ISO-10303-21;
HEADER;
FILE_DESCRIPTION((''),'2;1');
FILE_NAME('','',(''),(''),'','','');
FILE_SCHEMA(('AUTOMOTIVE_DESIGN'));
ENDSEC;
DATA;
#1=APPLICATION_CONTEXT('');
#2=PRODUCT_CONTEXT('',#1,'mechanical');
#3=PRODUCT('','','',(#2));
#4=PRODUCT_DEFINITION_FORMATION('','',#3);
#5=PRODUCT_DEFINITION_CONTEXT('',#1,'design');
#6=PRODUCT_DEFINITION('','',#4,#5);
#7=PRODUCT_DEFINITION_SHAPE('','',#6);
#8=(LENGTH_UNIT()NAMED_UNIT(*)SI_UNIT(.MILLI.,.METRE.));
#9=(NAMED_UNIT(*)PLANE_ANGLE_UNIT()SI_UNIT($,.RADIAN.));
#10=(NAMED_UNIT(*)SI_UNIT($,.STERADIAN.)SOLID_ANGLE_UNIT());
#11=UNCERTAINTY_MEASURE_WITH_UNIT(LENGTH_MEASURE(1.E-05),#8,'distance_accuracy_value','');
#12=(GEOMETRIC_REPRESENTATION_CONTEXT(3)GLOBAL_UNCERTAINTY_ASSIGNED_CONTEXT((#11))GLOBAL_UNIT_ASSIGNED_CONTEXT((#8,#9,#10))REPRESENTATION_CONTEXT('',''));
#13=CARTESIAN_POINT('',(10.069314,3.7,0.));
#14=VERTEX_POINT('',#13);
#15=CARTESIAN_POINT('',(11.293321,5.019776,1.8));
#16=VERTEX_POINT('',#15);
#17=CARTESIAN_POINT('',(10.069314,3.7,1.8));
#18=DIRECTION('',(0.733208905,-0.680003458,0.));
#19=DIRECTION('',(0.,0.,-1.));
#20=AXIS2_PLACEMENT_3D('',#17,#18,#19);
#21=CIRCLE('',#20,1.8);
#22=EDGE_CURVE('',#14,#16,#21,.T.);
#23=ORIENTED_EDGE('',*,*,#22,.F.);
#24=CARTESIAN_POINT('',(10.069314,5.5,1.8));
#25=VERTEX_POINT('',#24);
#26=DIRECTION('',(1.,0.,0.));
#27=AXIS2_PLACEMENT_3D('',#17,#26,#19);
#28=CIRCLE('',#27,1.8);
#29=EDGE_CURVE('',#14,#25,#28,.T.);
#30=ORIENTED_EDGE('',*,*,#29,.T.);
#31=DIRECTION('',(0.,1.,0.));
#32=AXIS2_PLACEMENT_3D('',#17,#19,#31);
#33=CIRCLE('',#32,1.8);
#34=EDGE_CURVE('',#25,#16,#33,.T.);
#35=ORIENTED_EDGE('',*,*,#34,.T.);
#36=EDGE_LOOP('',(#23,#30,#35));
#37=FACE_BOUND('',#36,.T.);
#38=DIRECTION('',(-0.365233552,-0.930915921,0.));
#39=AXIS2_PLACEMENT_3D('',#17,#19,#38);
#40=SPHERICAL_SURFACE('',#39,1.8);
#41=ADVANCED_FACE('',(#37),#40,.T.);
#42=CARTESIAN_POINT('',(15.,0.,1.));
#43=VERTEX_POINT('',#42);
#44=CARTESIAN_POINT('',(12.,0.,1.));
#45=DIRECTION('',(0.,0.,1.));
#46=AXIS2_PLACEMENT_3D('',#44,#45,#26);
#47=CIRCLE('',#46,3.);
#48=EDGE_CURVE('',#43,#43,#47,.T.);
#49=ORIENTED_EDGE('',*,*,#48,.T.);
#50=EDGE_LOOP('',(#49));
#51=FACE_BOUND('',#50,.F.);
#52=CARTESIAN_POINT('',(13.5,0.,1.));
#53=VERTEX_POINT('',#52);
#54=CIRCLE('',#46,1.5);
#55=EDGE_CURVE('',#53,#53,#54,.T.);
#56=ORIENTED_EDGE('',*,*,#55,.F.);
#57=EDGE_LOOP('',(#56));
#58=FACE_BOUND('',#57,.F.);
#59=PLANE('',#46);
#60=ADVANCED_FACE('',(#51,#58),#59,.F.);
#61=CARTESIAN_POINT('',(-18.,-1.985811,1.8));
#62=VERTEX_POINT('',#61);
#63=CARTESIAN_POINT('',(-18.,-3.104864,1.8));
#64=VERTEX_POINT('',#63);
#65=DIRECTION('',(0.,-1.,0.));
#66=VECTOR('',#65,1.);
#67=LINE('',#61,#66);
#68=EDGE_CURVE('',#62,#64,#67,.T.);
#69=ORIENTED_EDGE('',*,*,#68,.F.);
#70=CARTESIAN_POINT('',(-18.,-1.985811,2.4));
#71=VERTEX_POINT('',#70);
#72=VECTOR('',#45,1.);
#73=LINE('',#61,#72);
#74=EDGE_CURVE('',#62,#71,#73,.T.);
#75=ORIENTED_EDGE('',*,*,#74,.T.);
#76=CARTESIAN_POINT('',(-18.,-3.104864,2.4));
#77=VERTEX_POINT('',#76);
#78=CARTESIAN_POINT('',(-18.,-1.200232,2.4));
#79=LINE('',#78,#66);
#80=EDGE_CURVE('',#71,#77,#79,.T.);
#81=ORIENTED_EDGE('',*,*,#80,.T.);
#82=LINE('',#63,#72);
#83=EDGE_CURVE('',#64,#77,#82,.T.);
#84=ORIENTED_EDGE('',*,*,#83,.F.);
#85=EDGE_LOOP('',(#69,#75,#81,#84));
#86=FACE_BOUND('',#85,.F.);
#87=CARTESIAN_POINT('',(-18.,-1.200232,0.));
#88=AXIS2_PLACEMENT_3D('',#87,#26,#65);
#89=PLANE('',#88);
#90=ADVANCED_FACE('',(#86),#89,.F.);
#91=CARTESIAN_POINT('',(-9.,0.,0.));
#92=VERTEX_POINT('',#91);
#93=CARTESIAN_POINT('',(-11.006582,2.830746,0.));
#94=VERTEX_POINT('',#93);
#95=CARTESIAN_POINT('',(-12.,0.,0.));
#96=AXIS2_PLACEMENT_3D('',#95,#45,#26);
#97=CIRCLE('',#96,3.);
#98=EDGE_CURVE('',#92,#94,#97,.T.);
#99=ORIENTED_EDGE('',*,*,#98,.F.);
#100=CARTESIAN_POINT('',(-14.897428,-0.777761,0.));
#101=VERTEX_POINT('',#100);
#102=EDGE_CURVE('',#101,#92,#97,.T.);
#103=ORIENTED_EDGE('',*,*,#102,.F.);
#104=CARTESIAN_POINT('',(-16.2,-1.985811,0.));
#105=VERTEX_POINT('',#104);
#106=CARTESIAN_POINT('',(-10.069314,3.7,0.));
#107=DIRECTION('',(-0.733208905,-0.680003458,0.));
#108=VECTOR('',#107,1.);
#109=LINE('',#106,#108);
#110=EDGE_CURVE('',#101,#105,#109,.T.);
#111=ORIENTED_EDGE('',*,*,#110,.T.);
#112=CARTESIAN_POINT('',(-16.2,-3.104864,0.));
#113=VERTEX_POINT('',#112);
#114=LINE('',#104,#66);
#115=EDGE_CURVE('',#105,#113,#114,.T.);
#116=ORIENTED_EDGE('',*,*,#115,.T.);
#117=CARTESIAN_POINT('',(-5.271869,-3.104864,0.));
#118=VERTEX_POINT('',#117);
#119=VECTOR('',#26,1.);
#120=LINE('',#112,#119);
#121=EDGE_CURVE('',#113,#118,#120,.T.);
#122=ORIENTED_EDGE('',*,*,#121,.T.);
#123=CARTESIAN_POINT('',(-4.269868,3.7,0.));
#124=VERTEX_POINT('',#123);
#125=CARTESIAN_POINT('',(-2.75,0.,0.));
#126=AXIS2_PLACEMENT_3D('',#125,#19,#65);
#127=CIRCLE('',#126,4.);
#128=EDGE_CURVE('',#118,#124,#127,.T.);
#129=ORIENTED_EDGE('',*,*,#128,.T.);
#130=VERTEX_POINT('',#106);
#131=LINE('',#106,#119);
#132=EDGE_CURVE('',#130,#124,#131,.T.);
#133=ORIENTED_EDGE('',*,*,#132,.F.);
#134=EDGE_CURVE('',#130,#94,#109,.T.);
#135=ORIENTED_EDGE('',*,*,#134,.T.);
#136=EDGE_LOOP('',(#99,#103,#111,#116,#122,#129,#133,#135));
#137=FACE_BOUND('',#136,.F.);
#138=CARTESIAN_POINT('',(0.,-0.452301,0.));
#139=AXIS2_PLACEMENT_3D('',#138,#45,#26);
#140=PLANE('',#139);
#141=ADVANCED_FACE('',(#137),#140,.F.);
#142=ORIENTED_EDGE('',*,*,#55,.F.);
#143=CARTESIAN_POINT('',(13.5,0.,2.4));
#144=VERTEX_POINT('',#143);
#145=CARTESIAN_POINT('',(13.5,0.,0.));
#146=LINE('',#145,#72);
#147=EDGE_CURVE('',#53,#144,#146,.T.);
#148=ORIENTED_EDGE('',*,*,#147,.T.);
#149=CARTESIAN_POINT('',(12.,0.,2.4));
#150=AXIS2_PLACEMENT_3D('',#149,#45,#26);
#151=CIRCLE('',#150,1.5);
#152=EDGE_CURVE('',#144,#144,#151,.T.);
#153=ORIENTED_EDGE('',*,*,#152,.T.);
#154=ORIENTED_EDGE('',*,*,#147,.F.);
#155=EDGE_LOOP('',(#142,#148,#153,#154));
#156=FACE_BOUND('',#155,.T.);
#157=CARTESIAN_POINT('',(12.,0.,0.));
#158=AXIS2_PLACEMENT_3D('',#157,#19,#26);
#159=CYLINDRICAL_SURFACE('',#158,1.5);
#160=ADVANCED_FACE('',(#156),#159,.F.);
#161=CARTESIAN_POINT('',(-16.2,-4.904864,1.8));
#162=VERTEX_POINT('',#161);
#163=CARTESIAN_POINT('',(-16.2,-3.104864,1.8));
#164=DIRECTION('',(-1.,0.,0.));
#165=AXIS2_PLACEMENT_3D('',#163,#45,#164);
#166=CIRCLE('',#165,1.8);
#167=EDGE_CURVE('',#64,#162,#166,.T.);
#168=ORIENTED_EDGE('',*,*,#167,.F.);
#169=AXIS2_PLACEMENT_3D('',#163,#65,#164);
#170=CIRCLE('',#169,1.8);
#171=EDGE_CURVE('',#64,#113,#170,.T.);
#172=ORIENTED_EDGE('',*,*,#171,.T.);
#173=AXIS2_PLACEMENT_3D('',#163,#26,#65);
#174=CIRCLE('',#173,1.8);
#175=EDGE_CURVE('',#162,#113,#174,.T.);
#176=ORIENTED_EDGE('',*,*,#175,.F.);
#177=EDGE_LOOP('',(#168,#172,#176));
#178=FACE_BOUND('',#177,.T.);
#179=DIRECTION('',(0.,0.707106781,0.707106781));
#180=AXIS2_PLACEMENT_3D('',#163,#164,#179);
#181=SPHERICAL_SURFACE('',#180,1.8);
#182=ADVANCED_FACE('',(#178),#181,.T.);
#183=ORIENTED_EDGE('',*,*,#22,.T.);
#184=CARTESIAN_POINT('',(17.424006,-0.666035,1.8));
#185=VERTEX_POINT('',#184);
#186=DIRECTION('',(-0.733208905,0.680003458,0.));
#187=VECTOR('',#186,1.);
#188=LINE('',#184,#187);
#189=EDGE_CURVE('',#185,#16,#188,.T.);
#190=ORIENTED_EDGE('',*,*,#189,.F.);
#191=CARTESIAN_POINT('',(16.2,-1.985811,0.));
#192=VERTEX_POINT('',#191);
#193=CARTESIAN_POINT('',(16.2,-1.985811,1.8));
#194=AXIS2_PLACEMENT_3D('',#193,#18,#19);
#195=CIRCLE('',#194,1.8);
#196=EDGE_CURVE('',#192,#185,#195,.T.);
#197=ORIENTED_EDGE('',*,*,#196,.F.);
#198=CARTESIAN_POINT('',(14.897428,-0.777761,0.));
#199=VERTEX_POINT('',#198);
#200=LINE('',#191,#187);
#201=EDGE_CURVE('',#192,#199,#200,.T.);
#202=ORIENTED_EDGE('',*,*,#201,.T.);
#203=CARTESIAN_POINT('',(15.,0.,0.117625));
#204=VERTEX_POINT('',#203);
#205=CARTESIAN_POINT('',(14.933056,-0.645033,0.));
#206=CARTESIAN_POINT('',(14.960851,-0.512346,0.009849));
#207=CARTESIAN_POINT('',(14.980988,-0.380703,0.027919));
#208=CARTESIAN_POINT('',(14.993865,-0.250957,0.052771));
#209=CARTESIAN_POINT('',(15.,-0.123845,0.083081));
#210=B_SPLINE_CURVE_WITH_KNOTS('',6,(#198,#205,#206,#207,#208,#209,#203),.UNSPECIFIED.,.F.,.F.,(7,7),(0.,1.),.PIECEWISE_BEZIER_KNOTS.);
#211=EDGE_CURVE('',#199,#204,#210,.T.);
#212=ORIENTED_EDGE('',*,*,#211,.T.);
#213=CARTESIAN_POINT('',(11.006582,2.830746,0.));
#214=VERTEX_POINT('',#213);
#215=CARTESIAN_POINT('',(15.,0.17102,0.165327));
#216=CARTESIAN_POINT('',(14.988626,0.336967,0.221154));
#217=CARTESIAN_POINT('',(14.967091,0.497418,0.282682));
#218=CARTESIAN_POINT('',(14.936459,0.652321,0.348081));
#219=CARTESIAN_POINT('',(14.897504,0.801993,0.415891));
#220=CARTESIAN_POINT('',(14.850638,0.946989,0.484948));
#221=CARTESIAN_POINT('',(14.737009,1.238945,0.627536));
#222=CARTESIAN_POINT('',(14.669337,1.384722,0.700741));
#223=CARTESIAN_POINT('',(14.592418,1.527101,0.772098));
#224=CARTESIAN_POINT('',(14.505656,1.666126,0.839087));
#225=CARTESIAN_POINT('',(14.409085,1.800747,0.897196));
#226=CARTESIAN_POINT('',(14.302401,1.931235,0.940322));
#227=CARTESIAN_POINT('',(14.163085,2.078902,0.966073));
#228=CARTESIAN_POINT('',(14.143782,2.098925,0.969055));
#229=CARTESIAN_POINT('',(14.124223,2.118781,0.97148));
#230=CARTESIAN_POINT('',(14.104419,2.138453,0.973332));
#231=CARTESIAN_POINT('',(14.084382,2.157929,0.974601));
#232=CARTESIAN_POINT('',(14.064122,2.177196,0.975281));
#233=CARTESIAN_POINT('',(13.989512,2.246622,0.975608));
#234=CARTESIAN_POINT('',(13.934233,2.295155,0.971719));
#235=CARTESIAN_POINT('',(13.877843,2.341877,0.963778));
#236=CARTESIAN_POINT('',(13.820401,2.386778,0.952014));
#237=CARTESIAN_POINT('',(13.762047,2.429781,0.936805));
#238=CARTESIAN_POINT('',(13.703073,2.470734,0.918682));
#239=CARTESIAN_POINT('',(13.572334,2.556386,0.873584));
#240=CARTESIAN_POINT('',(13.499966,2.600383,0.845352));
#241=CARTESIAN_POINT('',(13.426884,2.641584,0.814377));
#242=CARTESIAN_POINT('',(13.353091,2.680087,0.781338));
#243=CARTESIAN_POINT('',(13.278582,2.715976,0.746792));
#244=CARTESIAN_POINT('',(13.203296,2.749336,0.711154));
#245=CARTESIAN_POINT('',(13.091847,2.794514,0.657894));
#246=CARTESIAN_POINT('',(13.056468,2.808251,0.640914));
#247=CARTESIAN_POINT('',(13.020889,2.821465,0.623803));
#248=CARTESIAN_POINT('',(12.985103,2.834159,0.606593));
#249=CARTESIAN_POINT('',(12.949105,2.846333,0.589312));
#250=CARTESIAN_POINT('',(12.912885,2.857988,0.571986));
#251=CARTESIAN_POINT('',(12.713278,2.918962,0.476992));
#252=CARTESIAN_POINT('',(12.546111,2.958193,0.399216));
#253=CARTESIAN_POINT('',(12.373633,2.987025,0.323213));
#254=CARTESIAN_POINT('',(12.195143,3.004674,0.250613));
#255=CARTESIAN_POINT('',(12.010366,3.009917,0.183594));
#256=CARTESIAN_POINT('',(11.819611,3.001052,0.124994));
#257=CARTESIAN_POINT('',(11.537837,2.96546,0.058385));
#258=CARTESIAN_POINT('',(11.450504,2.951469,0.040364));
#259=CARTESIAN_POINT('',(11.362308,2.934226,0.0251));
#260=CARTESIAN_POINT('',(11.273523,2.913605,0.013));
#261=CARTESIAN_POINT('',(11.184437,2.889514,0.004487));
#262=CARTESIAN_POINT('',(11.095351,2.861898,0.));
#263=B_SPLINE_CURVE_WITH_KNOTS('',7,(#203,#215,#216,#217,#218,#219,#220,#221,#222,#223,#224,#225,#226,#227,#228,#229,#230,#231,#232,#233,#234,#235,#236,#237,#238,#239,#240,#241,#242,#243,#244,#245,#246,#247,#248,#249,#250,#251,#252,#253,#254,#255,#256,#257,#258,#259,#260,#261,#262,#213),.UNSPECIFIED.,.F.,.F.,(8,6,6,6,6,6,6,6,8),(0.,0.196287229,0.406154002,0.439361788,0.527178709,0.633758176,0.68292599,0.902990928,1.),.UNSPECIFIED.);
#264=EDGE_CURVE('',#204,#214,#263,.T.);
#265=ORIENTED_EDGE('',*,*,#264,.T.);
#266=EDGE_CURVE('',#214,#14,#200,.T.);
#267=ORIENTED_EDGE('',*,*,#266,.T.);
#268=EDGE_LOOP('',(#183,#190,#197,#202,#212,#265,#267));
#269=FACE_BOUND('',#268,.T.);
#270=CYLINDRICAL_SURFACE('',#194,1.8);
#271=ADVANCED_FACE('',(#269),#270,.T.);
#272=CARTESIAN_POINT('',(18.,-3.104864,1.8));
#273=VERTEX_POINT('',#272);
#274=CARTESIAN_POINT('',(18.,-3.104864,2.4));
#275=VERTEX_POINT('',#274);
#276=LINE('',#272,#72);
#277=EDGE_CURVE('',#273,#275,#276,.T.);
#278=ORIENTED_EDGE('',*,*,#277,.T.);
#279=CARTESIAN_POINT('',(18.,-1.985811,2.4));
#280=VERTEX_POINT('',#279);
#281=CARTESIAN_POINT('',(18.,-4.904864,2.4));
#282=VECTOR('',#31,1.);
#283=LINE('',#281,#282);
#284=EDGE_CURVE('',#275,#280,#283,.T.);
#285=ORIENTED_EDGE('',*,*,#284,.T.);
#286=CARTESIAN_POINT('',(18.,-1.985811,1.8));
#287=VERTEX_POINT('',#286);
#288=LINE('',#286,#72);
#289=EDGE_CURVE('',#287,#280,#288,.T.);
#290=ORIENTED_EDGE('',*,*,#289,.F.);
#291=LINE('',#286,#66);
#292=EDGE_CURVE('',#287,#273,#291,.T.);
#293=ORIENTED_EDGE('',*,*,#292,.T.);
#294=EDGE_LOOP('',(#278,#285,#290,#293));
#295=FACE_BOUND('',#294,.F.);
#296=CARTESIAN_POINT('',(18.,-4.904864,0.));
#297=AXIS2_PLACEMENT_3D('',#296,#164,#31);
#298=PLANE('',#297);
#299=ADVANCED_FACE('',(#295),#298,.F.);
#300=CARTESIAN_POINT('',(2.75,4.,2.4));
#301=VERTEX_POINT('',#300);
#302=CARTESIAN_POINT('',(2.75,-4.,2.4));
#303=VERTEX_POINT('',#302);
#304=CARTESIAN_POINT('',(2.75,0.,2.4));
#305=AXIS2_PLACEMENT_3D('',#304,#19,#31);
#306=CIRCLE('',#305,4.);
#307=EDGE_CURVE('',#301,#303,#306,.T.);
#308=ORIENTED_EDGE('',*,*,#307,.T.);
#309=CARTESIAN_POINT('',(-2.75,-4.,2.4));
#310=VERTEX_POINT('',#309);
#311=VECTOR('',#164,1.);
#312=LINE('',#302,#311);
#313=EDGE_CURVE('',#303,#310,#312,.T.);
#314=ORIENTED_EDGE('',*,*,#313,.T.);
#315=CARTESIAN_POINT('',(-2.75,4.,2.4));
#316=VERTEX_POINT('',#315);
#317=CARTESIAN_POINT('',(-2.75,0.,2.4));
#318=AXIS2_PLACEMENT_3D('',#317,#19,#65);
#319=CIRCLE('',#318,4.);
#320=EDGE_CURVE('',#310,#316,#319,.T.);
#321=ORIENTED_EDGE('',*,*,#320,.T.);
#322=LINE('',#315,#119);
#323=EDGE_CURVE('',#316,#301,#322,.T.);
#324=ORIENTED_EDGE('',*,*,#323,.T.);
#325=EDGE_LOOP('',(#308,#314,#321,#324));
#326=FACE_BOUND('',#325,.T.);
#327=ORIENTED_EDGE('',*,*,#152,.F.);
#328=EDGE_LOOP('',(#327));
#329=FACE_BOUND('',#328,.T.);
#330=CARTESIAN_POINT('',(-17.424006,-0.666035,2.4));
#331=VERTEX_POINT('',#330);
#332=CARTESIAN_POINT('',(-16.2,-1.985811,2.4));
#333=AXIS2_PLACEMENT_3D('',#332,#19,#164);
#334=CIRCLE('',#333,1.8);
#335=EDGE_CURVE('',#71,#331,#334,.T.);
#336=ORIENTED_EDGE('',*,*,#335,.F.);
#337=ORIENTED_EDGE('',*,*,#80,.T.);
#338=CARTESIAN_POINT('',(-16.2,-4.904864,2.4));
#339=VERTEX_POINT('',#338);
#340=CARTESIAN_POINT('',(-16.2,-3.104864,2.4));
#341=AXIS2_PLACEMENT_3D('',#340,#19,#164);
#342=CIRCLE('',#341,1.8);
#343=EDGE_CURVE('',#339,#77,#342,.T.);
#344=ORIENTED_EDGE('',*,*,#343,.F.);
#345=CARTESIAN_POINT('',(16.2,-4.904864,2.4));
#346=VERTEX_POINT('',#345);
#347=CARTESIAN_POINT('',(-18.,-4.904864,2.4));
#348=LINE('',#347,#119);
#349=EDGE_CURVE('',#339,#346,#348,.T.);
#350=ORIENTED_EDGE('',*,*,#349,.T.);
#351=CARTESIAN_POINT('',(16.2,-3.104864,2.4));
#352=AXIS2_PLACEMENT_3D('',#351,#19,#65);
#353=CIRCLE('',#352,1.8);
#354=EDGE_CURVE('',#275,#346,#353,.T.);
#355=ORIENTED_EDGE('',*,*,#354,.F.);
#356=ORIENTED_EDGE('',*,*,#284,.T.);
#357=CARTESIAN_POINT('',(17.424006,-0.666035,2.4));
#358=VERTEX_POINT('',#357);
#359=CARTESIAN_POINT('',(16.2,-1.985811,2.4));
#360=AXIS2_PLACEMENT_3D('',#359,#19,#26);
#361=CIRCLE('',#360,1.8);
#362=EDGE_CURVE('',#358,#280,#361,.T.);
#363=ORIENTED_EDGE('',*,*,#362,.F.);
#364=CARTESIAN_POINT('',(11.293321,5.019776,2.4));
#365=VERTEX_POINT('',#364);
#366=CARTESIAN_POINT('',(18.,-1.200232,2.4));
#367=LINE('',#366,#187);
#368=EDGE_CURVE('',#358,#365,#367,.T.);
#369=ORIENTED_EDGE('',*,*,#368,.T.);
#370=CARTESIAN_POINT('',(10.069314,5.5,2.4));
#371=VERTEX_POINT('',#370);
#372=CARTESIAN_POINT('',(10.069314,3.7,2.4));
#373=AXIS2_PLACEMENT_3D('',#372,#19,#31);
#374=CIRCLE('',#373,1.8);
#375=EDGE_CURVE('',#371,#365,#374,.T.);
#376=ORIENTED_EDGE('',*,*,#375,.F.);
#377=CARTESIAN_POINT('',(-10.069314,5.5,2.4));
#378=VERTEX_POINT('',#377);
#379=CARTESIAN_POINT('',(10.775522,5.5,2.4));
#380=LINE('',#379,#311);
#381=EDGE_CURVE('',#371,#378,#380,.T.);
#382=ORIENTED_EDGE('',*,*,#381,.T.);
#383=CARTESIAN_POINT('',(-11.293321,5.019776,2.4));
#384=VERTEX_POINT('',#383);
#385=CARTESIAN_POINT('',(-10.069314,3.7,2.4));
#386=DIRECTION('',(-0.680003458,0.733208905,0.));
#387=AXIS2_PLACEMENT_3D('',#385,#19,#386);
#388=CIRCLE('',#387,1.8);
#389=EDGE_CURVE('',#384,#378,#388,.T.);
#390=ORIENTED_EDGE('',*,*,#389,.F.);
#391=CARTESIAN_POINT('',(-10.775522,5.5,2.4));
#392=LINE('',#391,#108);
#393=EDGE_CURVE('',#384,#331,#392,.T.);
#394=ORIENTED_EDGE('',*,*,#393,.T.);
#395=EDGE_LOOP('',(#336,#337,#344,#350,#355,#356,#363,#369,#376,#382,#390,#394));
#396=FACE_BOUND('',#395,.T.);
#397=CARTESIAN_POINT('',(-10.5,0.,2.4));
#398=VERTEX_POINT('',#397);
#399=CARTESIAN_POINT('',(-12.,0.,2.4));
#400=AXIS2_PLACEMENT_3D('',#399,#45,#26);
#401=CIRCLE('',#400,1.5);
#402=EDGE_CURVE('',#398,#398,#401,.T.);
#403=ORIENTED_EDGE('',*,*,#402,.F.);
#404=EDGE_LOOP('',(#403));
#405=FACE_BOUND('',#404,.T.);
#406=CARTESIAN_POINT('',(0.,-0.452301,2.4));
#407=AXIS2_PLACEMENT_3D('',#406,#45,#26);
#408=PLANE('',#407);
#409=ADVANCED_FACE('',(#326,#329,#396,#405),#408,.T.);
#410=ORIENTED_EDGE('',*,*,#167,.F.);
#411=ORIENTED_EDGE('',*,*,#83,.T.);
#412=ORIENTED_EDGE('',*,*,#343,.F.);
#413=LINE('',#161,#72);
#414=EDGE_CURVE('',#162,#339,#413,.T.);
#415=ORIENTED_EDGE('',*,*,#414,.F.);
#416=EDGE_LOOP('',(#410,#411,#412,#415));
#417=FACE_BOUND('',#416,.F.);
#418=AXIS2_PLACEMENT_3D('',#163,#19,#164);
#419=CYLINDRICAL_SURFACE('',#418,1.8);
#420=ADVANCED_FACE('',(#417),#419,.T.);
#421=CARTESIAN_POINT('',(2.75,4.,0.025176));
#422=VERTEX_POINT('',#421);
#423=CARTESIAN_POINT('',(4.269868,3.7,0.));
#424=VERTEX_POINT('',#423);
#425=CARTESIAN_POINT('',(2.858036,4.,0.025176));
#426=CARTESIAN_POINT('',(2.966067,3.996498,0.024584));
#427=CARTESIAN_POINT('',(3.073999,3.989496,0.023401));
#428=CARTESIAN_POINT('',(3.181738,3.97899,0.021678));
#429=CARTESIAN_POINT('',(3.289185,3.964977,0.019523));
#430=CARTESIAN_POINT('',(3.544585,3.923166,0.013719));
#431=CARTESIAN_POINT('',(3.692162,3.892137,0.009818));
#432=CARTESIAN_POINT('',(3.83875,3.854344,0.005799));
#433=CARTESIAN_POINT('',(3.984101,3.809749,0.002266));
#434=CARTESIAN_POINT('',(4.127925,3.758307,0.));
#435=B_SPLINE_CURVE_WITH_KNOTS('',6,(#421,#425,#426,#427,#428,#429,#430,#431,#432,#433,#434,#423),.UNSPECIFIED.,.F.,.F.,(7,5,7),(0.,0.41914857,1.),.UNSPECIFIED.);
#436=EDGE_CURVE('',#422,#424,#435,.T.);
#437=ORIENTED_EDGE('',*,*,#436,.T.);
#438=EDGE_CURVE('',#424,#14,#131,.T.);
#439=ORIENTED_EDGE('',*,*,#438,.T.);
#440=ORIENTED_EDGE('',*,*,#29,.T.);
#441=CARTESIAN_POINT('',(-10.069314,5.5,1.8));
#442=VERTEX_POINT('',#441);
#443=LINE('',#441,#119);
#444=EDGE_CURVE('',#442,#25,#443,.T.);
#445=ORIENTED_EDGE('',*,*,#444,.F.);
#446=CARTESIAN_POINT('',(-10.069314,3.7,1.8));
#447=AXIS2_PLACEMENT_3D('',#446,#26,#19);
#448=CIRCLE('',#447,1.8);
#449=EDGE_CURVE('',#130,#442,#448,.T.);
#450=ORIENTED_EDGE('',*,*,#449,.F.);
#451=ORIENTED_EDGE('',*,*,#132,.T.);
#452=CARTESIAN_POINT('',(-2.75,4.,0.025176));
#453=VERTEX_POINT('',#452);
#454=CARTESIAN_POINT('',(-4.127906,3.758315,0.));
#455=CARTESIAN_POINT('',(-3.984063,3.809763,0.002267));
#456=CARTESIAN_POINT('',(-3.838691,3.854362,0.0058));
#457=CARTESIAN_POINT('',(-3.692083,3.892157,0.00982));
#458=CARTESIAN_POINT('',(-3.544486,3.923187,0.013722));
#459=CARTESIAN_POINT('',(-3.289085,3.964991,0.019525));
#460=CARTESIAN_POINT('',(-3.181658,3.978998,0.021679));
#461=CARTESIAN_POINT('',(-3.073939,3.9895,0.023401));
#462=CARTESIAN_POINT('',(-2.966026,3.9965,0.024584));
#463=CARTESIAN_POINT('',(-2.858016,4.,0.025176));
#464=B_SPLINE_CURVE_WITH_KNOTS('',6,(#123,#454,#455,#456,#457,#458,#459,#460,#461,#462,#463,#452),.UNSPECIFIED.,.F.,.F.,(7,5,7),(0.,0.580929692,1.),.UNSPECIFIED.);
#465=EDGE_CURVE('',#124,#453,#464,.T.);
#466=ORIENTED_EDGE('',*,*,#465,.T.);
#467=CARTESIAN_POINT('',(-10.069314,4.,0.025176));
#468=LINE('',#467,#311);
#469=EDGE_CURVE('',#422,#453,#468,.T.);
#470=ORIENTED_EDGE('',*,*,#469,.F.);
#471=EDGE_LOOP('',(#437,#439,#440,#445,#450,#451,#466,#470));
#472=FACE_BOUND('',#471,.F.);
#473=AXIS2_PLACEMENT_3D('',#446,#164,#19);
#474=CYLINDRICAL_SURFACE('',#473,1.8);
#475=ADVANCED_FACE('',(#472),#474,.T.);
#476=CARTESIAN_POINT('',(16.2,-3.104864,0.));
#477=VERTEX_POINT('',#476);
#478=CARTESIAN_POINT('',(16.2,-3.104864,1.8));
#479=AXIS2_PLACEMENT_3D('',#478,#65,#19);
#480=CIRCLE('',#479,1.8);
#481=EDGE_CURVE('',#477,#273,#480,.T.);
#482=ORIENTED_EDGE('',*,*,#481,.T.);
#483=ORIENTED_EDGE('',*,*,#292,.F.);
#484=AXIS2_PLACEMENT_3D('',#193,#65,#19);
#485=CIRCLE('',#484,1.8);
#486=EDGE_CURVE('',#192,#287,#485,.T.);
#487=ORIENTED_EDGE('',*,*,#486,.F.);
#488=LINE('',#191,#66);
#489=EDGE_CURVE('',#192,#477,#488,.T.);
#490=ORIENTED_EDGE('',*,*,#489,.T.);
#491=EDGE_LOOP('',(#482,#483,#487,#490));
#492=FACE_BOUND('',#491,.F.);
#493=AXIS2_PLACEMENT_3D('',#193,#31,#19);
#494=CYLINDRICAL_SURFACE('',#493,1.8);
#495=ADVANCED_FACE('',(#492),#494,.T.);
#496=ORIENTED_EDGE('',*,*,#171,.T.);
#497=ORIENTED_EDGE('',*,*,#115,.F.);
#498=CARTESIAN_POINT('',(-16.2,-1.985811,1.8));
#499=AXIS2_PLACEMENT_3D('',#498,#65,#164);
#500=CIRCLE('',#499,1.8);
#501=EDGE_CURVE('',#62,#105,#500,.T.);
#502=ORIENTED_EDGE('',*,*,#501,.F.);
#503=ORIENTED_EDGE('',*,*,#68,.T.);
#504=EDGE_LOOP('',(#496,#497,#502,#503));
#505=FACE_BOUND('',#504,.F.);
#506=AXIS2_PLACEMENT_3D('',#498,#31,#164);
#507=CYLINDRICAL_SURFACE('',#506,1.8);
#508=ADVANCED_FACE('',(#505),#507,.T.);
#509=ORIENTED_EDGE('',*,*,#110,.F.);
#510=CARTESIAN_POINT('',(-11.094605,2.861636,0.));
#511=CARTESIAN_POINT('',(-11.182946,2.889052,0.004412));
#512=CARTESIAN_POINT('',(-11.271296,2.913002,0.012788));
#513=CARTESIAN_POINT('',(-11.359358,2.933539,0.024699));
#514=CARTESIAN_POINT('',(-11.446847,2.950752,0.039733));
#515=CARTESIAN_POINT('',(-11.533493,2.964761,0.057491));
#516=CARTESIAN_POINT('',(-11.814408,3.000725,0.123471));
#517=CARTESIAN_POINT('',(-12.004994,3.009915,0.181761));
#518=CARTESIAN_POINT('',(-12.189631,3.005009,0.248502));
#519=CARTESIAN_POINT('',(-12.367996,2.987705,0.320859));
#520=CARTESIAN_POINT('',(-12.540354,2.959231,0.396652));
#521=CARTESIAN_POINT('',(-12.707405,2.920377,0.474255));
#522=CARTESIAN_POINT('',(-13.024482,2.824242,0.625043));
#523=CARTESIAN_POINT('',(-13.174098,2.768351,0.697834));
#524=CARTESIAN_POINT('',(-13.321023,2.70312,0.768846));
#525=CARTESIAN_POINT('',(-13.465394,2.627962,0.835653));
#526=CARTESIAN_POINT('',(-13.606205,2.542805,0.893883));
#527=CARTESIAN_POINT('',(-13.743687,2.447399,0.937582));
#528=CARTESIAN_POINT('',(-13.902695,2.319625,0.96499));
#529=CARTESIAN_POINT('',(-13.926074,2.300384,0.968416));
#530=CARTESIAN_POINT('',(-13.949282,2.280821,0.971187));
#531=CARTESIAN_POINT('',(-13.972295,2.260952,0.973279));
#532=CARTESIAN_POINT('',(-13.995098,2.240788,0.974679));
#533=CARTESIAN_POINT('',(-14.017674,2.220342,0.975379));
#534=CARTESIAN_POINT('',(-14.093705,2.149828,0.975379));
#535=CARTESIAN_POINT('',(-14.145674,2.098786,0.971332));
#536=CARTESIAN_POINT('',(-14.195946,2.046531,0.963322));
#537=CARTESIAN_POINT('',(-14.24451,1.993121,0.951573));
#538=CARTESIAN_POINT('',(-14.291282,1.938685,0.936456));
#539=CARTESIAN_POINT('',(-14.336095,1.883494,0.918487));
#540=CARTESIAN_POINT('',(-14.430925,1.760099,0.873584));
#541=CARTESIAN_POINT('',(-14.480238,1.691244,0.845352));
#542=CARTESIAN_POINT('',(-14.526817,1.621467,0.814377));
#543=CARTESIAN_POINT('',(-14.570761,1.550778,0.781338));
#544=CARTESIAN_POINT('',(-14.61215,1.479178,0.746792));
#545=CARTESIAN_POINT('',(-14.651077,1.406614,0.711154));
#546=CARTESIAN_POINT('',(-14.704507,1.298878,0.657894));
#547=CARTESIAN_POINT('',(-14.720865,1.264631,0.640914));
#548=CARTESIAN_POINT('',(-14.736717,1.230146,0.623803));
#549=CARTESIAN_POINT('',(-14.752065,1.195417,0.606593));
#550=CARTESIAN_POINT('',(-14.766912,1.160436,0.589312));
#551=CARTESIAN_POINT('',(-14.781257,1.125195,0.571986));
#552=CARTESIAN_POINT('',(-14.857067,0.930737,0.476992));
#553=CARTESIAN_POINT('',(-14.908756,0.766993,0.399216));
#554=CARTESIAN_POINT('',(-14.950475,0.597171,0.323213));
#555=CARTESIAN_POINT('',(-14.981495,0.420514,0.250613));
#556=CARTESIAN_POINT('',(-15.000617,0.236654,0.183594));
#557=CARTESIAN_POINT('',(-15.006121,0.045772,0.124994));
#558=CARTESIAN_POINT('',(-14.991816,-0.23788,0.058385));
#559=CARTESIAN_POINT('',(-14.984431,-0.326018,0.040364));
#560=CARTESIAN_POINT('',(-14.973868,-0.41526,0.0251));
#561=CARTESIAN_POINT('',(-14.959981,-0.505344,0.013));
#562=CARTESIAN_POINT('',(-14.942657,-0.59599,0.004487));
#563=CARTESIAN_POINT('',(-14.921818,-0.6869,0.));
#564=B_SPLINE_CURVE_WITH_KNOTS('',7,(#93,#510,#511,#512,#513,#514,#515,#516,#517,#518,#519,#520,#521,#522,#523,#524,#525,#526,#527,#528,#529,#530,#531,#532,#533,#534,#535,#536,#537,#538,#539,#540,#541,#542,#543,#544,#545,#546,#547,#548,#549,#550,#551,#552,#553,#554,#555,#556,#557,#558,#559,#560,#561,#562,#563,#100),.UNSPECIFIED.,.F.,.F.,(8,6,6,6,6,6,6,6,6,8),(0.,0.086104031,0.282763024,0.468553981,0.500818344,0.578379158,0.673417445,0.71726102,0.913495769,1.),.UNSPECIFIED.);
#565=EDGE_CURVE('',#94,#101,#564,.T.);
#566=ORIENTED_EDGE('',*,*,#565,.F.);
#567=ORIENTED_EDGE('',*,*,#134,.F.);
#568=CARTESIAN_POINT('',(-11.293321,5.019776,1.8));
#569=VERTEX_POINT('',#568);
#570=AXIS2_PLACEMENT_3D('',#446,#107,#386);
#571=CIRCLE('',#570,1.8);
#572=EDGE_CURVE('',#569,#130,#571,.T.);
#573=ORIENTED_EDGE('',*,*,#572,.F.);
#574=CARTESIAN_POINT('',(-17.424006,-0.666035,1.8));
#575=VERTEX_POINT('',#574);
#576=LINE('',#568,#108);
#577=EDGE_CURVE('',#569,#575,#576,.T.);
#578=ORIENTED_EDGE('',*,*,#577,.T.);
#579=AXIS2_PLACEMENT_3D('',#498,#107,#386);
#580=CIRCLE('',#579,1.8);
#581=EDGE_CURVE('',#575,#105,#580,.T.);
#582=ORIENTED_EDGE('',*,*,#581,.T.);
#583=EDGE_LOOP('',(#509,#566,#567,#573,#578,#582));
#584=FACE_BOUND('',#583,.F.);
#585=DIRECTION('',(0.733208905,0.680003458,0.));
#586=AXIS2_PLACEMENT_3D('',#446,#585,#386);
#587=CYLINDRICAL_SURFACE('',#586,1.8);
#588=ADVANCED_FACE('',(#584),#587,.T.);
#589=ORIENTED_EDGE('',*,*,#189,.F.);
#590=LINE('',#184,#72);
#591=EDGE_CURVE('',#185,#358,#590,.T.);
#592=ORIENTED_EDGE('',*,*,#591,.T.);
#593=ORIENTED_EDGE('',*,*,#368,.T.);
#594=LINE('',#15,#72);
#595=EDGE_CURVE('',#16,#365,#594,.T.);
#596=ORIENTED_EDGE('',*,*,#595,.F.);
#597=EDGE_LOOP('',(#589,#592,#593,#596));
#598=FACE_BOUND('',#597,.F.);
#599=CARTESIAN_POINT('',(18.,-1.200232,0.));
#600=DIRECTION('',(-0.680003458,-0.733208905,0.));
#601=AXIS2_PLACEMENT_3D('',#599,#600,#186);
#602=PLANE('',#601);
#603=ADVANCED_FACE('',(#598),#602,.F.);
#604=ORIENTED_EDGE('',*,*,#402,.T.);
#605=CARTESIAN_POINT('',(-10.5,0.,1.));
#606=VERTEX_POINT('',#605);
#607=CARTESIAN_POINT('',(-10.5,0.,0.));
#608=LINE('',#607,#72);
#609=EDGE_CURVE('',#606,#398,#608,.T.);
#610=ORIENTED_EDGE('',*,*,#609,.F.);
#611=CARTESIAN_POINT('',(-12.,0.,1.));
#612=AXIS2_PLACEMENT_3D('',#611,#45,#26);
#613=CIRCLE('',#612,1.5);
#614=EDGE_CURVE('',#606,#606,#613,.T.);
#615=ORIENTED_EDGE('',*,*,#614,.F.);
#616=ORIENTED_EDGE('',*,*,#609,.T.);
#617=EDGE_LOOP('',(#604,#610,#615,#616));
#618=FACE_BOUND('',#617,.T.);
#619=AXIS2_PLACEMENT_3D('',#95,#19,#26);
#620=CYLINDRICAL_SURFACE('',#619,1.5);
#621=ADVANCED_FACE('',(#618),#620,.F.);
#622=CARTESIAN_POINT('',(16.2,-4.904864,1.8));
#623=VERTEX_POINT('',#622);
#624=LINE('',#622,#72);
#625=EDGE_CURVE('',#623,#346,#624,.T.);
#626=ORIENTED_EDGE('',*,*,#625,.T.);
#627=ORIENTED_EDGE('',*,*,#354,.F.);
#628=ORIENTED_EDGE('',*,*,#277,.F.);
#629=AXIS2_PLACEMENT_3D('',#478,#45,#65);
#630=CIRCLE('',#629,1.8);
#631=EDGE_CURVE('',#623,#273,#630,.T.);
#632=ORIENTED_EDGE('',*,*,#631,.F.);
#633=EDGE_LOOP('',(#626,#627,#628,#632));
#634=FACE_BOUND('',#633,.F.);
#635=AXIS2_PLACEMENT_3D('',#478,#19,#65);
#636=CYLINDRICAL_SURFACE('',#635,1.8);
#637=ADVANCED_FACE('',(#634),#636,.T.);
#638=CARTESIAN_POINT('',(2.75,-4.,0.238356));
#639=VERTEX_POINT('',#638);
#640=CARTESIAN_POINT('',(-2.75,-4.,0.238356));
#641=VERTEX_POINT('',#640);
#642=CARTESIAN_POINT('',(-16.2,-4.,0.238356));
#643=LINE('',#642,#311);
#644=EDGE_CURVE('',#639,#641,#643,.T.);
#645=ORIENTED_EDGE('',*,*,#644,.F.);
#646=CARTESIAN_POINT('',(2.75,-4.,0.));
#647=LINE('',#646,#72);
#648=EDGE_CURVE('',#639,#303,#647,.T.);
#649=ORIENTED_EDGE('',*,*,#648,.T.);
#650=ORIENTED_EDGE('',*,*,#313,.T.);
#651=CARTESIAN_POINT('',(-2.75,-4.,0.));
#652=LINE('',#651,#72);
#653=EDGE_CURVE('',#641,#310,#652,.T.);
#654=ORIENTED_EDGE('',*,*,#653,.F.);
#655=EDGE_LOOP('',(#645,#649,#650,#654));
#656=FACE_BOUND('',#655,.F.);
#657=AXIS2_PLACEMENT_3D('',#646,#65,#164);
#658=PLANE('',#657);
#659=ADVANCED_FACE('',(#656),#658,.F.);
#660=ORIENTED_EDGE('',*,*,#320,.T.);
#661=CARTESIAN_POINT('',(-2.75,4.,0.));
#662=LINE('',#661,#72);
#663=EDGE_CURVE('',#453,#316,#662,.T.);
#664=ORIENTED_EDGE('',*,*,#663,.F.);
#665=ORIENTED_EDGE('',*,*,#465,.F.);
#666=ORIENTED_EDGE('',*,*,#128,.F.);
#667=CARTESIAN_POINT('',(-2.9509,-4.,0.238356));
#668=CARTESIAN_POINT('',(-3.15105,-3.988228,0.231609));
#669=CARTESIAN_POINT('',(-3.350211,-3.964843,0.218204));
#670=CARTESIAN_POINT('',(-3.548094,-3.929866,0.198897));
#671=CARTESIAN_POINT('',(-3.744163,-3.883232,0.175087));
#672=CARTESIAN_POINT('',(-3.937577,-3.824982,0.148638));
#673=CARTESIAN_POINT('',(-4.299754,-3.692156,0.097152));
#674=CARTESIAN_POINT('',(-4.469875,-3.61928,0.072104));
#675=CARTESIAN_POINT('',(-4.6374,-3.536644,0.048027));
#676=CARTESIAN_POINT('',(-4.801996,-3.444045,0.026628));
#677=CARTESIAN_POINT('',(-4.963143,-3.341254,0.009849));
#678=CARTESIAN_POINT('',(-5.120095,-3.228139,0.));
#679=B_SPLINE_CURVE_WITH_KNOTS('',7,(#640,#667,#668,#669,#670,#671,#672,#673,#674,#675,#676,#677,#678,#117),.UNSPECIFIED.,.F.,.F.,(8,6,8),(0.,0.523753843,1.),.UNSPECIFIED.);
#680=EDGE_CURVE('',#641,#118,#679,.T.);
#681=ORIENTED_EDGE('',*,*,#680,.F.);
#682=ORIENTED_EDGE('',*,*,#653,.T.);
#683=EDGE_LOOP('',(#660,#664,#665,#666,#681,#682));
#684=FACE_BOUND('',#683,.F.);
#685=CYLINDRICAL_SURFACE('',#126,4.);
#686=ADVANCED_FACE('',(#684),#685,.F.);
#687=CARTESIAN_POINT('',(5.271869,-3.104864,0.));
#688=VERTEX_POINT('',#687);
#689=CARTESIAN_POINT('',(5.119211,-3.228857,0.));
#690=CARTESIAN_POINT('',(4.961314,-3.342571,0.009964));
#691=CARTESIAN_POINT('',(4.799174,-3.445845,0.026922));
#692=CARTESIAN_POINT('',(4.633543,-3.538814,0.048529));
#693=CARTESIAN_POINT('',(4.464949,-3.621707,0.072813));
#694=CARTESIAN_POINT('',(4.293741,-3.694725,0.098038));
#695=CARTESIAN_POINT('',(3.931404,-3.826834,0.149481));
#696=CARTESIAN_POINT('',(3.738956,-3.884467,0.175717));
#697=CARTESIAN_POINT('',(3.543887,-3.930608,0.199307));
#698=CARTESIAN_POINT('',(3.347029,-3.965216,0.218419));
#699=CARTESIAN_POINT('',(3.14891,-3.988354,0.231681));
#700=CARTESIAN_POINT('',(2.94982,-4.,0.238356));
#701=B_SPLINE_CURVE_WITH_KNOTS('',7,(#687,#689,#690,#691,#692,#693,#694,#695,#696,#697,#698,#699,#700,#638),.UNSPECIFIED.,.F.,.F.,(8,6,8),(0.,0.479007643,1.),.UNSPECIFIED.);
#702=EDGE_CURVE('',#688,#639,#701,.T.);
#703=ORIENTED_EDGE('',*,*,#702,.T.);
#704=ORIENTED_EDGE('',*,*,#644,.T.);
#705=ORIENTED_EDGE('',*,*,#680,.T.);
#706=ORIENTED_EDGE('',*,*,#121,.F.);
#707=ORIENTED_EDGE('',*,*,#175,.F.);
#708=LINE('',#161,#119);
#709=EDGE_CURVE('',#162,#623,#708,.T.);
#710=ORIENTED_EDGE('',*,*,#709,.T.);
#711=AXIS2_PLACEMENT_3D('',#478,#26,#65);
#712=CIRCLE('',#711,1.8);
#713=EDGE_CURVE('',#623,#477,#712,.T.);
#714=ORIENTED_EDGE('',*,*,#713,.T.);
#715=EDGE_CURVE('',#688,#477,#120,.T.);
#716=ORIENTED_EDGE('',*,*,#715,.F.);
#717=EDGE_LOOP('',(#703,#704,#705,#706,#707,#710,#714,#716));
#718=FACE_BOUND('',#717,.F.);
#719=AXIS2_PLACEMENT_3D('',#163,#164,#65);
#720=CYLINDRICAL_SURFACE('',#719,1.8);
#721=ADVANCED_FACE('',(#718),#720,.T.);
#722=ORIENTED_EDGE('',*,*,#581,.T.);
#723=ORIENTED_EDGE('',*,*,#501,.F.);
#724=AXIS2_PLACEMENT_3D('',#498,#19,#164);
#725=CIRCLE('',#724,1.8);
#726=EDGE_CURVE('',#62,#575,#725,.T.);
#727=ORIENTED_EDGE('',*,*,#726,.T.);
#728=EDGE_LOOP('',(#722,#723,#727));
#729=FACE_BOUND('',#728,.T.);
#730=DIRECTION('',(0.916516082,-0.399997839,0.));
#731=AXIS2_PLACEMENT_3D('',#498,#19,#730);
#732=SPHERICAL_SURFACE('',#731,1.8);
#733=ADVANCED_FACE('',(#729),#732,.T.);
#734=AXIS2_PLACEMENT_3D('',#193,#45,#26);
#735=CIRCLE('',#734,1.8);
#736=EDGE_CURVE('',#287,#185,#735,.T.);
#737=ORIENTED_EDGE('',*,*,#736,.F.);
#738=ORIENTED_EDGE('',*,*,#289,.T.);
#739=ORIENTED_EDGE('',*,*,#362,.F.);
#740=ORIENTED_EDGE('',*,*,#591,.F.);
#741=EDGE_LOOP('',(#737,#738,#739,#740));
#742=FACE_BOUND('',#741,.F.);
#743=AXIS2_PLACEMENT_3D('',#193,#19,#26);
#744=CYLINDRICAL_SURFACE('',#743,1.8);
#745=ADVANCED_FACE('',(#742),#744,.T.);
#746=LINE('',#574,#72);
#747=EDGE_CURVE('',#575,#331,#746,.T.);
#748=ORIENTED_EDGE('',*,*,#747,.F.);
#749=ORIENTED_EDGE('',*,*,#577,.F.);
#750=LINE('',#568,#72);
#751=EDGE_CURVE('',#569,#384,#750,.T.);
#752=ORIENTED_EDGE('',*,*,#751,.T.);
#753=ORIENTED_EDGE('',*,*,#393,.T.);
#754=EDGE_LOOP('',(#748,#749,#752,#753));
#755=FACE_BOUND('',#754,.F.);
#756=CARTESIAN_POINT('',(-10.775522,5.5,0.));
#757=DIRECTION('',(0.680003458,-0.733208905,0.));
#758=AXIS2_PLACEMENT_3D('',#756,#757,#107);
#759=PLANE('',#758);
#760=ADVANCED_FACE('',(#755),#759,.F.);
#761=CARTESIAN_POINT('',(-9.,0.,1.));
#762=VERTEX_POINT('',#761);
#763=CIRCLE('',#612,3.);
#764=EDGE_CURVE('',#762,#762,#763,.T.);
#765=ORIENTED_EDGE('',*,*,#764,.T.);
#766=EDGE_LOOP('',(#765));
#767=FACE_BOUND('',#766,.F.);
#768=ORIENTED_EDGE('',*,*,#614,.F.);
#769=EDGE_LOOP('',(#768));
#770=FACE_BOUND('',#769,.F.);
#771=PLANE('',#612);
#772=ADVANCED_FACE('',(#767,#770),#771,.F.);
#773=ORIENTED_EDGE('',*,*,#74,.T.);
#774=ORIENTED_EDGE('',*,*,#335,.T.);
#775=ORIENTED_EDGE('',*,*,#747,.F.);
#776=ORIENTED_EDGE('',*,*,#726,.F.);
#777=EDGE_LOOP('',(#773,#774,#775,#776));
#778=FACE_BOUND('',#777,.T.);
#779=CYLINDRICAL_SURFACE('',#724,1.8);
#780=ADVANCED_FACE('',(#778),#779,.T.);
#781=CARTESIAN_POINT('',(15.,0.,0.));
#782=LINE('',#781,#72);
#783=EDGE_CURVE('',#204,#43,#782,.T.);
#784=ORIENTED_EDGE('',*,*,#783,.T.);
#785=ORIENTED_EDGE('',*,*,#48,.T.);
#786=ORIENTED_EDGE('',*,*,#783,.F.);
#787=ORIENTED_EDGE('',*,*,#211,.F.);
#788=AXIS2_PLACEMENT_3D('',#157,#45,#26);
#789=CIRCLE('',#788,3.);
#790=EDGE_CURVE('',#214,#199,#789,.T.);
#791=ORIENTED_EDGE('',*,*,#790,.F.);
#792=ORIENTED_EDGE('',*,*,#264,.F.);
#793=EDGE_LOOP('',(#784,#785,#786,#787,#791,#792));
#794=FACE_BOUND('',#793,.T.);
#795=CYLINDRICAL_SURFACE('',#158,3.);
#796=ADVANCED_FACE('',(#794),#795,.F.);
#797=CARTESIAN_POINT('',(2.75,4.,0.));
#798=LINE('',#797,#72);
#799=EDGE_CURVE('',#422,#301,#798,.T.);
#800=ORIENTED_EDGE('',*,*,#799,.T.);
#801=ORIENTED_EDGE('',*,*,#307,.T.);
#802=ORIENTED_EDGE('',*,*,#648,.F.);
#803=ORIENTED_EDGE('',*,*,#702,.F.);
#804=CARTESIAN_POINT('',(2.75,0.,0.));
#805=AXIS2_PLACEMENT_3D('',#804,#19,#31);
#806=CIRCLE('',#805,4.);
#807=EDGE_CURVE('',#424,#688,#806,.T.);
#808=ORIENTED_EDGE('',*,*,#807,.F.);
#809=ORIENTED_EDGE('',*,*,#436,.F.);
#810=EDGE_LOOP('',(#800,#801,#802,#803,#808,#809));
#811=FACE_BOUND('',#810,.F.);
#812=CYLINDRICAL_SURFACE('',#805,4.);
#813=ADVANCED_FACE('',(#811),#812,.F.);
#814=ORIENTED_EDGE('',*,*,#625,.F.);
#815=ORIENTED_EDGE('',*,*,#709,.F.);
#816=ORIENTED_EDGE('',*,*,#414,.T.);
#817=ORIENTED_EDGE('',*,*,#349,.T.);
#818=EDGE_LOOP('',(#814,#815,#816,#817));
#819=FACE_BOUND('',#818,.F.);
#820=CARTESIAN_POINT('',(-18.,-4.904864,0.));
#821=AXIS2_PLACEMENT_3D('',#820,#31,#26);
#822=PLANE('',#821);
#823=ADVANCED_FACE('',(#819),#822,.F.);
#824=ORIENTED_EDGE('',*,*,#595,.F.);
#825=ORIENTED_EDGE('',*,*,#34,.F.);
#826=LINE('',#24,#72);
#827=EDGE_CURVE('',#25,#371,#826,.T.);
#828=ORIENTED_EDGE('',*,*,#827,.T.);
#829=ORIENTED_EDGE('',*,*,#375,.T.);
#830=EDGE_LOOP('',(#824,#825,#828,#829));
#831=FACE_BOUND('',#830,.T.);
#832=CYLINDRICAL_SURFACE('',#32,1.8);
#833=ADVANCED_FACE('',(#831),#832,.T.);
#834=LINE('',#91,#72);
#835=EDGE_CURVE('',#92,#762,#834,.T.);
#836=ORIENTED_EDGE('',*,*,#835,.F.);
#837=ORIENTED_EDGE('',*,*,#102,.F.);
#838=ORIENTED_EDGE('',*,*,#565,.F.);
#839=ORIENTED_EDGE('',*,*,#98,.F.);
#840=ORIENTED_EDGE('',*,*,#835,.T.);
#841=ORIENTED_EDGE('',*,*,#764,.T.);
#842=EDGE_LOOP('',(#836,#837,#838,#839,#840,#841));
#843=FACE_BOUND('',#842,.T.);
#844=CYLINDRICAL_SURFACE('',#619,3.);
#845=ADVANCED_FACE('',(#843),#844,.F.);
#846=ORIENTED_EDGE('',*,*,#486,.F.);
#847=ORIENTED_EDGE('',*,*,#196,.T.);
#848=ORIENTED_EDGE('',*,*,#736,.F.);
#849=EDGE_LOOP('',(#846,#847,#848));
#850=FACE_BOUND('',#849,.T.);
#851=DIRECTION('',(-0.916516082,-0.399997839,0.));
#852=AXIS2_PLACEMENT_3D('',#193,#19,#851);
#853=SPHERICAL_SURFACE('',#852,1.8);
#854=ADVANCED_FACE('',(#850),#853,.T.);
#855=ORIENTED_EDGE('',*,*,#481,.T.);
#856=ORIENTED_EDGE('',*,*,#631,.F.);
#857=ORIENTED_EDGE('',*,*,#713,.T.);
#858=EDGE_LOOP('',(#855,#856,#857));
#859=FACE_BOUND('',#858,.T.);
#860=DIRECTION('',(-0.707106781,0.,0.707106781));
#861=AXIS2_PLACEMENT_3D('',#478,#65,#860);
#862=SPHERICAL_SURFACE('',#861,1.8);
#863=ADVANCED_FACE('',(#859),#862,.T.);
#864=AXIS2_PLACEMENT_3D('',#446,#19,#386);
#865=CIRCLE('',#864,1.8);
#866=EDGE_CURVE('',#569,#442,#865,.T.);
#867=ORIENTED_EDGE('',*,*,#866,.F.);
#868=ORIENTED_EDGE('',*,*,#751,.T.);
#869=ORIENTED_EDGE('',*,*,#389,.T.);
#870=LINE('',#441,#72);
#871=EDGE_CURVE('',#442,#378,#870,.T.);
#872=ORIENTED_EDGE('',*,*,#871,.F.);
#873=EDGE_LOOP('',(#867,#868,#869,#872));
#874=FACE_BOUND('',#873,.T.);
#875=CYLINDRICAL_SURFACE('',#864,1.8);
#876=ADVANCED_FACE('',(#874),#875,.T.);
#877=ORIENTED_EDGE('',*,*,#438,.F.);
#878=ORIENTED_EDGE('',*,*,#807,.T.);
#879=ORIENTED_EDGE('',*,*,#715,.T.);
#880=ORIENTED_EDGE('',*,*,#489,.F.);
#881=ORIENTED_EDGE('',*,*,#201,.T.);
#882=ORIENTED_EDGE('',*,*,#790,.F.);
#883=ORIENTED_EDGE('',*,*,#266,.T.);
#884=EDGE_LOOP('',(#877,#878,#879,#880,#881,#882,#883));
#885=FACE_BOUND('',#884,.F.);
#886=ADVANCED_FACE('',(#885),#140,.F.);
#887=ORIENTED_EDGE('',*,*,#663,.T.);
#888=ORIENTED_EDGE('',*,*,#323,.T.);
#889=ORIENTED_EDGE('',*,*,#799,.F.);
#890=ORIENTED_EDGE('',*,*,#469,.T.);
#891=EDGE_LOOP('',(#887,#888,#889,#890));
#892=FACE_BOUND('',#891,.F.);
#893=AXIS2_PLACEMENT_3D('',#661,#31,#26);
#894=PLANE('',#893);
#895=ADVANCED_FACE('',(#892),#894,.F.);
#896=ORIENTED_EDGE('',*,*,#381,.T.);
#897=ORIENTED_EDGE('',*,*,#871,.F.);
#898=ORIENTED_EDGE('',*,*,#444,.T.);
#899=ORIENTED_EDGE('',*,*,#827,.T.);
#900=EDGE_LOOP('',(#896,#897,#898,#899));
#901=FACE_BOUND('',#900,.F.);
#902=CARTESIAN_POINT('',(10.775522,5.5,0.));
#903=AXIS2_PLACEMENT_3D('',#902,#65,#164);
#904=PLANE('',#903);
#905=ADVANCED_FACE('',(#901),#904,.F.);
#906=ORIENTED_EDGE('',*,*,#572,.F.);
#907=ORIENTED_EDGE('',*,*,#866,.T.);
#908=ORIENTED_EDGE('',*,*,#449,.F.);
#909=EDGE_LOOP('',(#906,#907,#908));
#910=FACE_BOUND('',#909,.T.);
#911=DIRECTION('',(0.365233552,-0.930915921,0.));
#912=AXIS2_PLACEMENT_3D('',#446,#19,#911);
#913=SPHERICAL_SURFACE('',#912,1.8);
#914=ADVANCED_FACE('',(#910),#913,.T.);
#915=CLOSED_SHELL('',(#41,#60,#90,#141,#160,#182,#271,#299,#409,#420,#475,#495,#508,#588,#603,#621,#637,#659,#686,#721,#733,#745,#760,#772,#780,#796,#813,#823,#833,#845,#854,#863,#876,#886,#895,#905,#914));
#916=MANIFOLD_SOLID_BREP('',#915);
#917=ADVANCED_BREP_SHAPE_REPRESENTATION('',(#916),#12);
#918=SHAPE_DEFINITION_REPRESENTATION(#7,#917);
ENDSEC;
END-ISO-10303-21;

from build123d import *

# Parameters (mm, degrees)
F0_R         = 3
F0_R_2       = 1.5
F1_DEPTH     = 2.4
F2_DEPTH     = 1
F3_T1_DEPTH  = 1.1190522621
F3_T3_DEPTH  = 32.4
F3_T5_DEPTH  = 20.138628613
F3_T7_DEPTH  = 2.365520331
F3_T9_DEPTH  = 8.3614446785
F3_T11_DEPTH = 8.3614446785
F3_T13_DEPTH = 5.1
F3_T15_DEPTH = 2.5639483811
F3_T20_DEPTH = 1.8
F3_S25_W     = 1.8
F3_S25_H     = 1.8
F3_T26_DEPTH = 1.8
F3_S31_W     = 1.8
F3_S31_H     = 1.8
F3_T32_DEPTH = 1.8
F3_T38_DEPTH = 1.8
F3_T44_DEPTH = 1.8
F3_T50_DEPTH = 1.8


# Not quite as in the source:
# - a fillet or chamfer that OpenCascade refuses, or shapes differently, is made with other operations: its cross-section is extruded or revolved along the edge and cut away or added


with BuildPart() as f1:
    # F0 (on Top) → F1 (new body)
    with BuildSketch(Plane.XY):
        Polygon((-18, -1.2002319389), (-18, -4.9048635534), (18, -4.9048635534), (18, -1.2002319389), (10.7755224389, 5.5), (-10.7755224389, 5.5), align=None)
        with Locations((-12, 0)):
            Circle(F0_R, mode=Mode.SUBTRACT)
        with BuildLine():
            ThreePointArc((-2.75, -4), (-6.75, 0), (-2.75, 4))
            Line((-2.75, 4), (2.75, 4))
            ThreePointArc((2.75, 4), (6.75, 0), (2.75, -4))
            Line((2.75, -4), (-2.75, -4))
        make_face(mode=Mode.SUBTRACT)
        with Locations((12, 0)):
            Circle(F0_R, mode=Mode.SUBTRACT)
        with Locations((-12, 0)):
            Circle(F0_R)
        with Locations((-12, 0)):
            Circle(F0_R_2, mode=Mode.SUBTRACT)
        with Locations((12, 0)):
            Circle(F0_R)
        with Locations((12, 0)):
            Circle(F0_R_2, mode=Mode.SUBTRACT)
    extrude(amount=F1_DEPTH)

    # F0 (on Top) → F2 (cut)
    with BuildSketch(Plane.XY):
        with Locations((12, 0)):
            Circle(F0_R)
        with Locations((12, 0)):
            Circle(F0_R_2, mode=Mode.SUBTRACT)
        with Locations((-12, 0)):
            Circle(F0_R)
        with Locations((-12, 0)):
            Circle(F0_R_2, mode=Mode.SUBTRACT)
    extrude(amount=F2_DEPTH, mode=Mode.SUBTRACT)

    # F3: fillet of radius 1.8 on 12 edges, made by hand

    # F3_s2 → F3_t1 (cut)
    with BuildSketch(Plane.XZ.offset(1.9858112913)):
        with BuildLine():
            ThreePointArc((-18, 1.8), (-17.4727922061, 0.5272077939), (-16.2, 0))
            Line((-16.2, 0), (-18, 0))
            Line((-18, 0), (-18, 1.8))
        make_face()
        with BuildLine():
            ThreePointArc((16.2, 0), (17.4727922061, 0.5272077939), (18, 1.8))
            Line((18, 1.8), (18, 0))
            Line((18, 0), (16.2, 0))
        make_face()
    extrude(amount=F3_T1_DEPTH, mode=Mode.SUBTRACT)

    # F3_s4 → F3_t3 (cut)
    with BuildSketch(Plane.YZ.offset(-16.2)):
        with BuildLine():
            ThreePointArc((-4.9048635534, 1.8), (-4.3776557595, 0.5272077939), (-3.1048635534, 0))
            Line((-3.1048635534, 0), (-4.9048635534, 0))
            Line((-4.9048635534, 0), (-4.9048635534, 1.8))
        make_face()
    extrude(amount=F3_T3_DEPTH, mode=Mode.SUBTRACT)

    # F3_s6 → F3_t5 (cut)
    with BuildSketch(Plane.YZ.offset(-10.0693143065)):
        with BuildLine():
            ThreePointArc((3.7, 0), (4.9727922061, 0.5272077939), (5.5, 1.8))
            Line((5.5, 1.8), (5.5, 0))
            Line((5.5, 0), (3.7, 0))
        make_face()
    extrude(amount=F3_T5_DEPTH, mode=Mode.SUBTRACT)

    # F3_s8 → F3_t7 (cut)
    with BuildSketch(Plane.XY.offset(1.8)):
        with BuildLine():
            ThreePointArc((10.0693143065, 5.5), (10.7267347006, 5.3756486581), (11.2933205301, 5.0197760282))
            Line((11.2933205301, 5.0197760282), (10.7755224389, 5.5))
            Line((10.7755224389, 5.5), (10.0693143065, 5.5))
        make_face()
        with BuildLine():
            ThreePointArc((-11.2933205301, 5.0197760282), (-10.7267347006, 5.3756486581), (-10.0693143065, 5.5))
            Line((-10.0693143065, 5.5), (-10.7755224389, 5.5))
            Line((-10.7755224389, 5.5), (-11.2933205301, 5.0197760282))
        make_face()
    extrude(amount=F3_T7_DEPTH, mode=Mode.SUBTRACT)

    # F3_s10 → F3_t9 (cut)
    with BuildSketch(Plane(origin=(-3.5684530391, -3.3095075488, 0), x_dir=(0, 0, 1), z_dir=(-0.7332089046, -0.6800034575, 0))):
        with BuildLine():
            ThreePointArc((1.8, 11.3600414903), (0.5272077939, 10.8328336964), (0, 9.5600414903))
            Line((0, 9.5600414903), (0, 11.3600414903))
            Line((0, 11.3600414903), (1.8, 11.3600414903))
        make_face()
    extrude(amount=F3_T9_DEPTH, mode=Mode.SUBTRACT)

    # F3_s12 → F3_t11 (cut)
    with BuildSketch(Plane(origin=(9.6991387326, -8.9953188401, 0), x_dir=(0, 0, 1), z_dir=(-0.7332089046, 0.6800034575, 0))):
        with BuildLine():
            ThreePointArc((0, 9.5600414903), (0.5272077939, 10.8328336964), (1.8, 11.3600414903))
            Line((1.8, 11.3600414903), (0, 11.3600414903))
            Line((0, 11.3600414903), (0, 9.5600414903))
        make_face()
    extrude(amount=F3_T11_DEPTH, mode=Mode.SUBTRACT)

    # F3_s14 → F3_t13 (cut)
    with BuildSketch(Plane.XY.offset(1.8)):
        with BuildLine():
            ThreePointArc((-18, -3.1048635534), (-17.4727922061, -4.3776557595), (-16.2, -4.9048635534))
            Line((-16.2, -4.9048635534), (-18, -4.9048635534))
            Line((-18, -4.9048635534), (-18, -3.1048635534))
        make_face()
        with BuildLine():
            ThreePointArc((16.2, -4.9048635534), (17.4727922061, -4.3776557595), (18, -3.1048635534))
            Line((18, -3.1048635534), (18, -4.9048635534))
            Line((18, -4.9048635534), (16.2, -4.9048635534))
        make_face()
    extrude(amount=F3_T13_DEPTH, mode=Mode.SUBTRACT)

    # F3_s16 → F3_t15 (cut)
    with BuildSketch(Plane.XY.offset(1.8)):
        with BuildLine():
            ThreePointArc((-18, -1.9858112913), (-17.8497289478, -1.265815181), (-17.4240062235, -0.666035263))
            Line((-17.4240062235, -0.666035263), (-18, -1.2002319389))
            Line((-18, -1.2002319389), (-18, -1.9858112913))
        make_face()
        with BuildLine():
            ThreePointArc((18, -1.9858112913), (17.8497289478, -1.265815181), (17.4240062235, -0.666035263))
            Line((17.4240062235, -0.666035263), (18, -1.2002319389))
            Line((18, -1.2002319389), (18, -1.9858112913))
        make_face()
    extrude(amount=F3_T15_DEPTH, mode=Mode.SUBTRACT)


with BuildPart() as f3_tool18:
    # F3_s19 → F3_t20 (new body)
    with BuildSketch(Plane.XY.offset(1.8)):
        Polygon((-16.2, -1.9858112913), (-18, -1.9858112913), (-18, -1.2002319389), (-17.4240062235, -0.666035263), align=None)
    extrude(amount=-F3_T20_DEPTH)

    # F3_s21 → F3_t22 (revolve, cut)
    with BuildSketch(Plane(origin=(-16.2, -1.9858112913, 1.8), x_dir=(0.9165160821, -0.399997839, 0), z_dir=(0.399997839, 0.9165160821, 0))):
        with BuildLine():
            ThreePointArc((0, -1.8), (1.8, 0), (0, 1.8))
            Line((0, 1.8), (0, -1.8))
        make_face()
    revolve(axis=Axis((-16.2, -1.9858112913, 1.8), (0, 0, -1)), mode=Mode.SUBTRACT)


with BuildPart() as f1_1:
    add(f1.part)

    # F3_t17: cut F3_tool18
    add(f3_tool18.part, mode=Mode.SUBTRACT)


with BuildPart() as f3_tool24:
    # F3_s25 → F3_t26 (new body)
    with BuildSketch(Plane.YZ.offset(-16.2)):
        with Locations((-4.0048635534, 0.9)):
            Rectangle(F3_S25_W, F3_S25_H)
    extrude(amount=-F3_T26_DEPTH)

    # F3_s27 → F3_t28 (revolve, cut)
    with BuildSketch(Plane(origin=(-16.2, -3.1048635534, 1.8), x_dir=(0, 0.7071067812, 0.7071067812), z_dir=(0, -0.7071067812, 0.7071067812))):
        with BuildLine():
            ThreePointArc((0, -1.8), (1.8, 0), (0, 1.8))
            Line((0, 1.8), (0, -1.8))
        make_face()
    revolve(axis=Axis((-16.2, -3.1048635534, 1.8), (-1, 0, 0)), mode=Mode.SUBTRACT)


with BuildPart() as f1_2:
    add(f1_1.part)

    # F3_t23: cut F3_tool24
    add(f3_tool24.part, mode=Mode.SUBTRACT)


with BuildPart() as f3_tool30:
    # F3_s31 → F3_t32 (new body)
    with BuildSketch(Plane.XZ.offset(3.1048635534)):
        with Locations((17.1, 0.9)):
            Rectangle(F3_S31_W, F3_S31_H)
    extrude(amount=F3_T32_DEPTH)

    # F3_s33 → F3_t34 (revolve, cut)
    with BuildSketch(Plane(origin=(16.2, -3.1048635534, 1.8), x_dir=(-0.7071067812, 0, 0.7071067812), z_dir=(0.7071067812, 0, 0.7071067812))):
        with BuildLine():
            ThreePointArc((0, -1.8), (1.8, 0), (0, 1.8))
            Line((0, 1.8), (0, -1.8))
        make_face()
    revolve(axis=Axis((16.2, -3.1048635534, 1.8), (0, -1, 0)), mode=Mode.SUBTRACT)


with BuildPart() as f1_3:
    add(f1_2.part)

    # F3_t29: cut F3_tool30
    add(f3_tool30.part, mode=Mode.SUBTRACT)


with BuildPart() as f3_tool36:
    # F3_s37 → F3_t38 (new body)
    with BuildSketch(Plane.XY.offset(1.8)):
        Polygon((16.2, -1.9858112913), (18, -1.9858112913), (18, -1.2002319389), (17.4240062235, -0.666035263), align=None)
    extrude(amount=-F3_T38_DEPTH)

    # F3_s39 → F3_t40 (revolve, cut)
    with BuildSketch(Plane(origin=(16.2, -1.9858112913, 1.8), x_dir=(-0.9165160821, -0.399997839, 0), z_dir=(0.399997839, -0.9165160821, 0))):
        with BuildLine():
            ThreePointArc((0, -1.8), (1.8, 0), (0, 1.8))
            Line((0, 1.8), (0, -1.8))
        make_face()
    revolve(axis=Axis((16.2, -1.9858112913, 1.8), (0, 0, -1)), mode=Mode.SUBTRACT)


with BuildPart() as f1_4:
    add(f1_3.part)

    # F3_t35: cut F3_tool36
    add(f3_tool36.part, mode=Mode.SUBTRACT)


with BuildPart() as f3_tool42:
    # F3_s43 → F3_t44 (new body)
    with BuildSketch(Plane.XY.offset(1.8)):
        Polygon((10.0693143065, 3.7), (10.0693143065, 5.5), (10.7755224389, 5.5), (11.2933205301, 5.0197760282), align=None)
    extrude(amount=-F3_T44_DEPTH)

    # F3_s45 → F3_t46 (revolve, cut)
    with BuildSketch(Plane(origin=(10.0693143065, 3.7, 1.8), x_dir=(-0.3652335523, -0.9309159212, 0), z_dir=(0.9309159212, -0.3652335523, 0))):
        with BuildLine():
            ThreePointArc((0, -1.8), (1.8, 0), (0, 1.8))
            Line((0, 1.8), (0, -1.8))
        make_face()
    revolve(axis=Axis((10.0693143065, 3.7, 1.8), (0, 0, -1)), mode=Mode.SUBTRACT)


with BuildPart() as f1_5:
    add(f1_4.part)

    # F3_t41: cut F3_tool42
    add(f3_tool42.part, mode=Mode.SUBTRACT)


with BuildPart() as f3_tool48:
    # F3_s49 → F3_t50 (new body)
    with BuildSketch(Plane.XY.offset(1.8)):
        Polygon((-10.0693143065, 3.7), (-10.0693143065, 5.5), (-10.7755224389, 5.5), (-11.2933205301, 5.0197760282), align=None)
    extrude(amount=-F3_T50_DEPTH)

    # F3_s51 → F3_t52 (revolve, cut)
    with BuildSketch(Plane(origin=(-10.0693143065, 3.7, 1.8), x_dir=(0.3652335523, -0.9309159212, 0), z_dir=(0.9309159212, 0.3652335523, 0))):
        with BuildLine():
            ThreePointArc((0, -1.8), (1.8, 0), (0, 1.8))
            Line((0, 1.8), (0, -1.8))
        make_face()
    revolve(axis=Axis((-10.0693143065, 3.7, 1.8), (0, 0, -1)), mode=Mode.SUBTRACT)


with BuildPart() as f1_6:
    add(f1_5.part)

    # F3_t47: cut F3_tool48
    add(f3_tool48.part, mode=Mode.SUBTRACT)


solid = f1_6.part
